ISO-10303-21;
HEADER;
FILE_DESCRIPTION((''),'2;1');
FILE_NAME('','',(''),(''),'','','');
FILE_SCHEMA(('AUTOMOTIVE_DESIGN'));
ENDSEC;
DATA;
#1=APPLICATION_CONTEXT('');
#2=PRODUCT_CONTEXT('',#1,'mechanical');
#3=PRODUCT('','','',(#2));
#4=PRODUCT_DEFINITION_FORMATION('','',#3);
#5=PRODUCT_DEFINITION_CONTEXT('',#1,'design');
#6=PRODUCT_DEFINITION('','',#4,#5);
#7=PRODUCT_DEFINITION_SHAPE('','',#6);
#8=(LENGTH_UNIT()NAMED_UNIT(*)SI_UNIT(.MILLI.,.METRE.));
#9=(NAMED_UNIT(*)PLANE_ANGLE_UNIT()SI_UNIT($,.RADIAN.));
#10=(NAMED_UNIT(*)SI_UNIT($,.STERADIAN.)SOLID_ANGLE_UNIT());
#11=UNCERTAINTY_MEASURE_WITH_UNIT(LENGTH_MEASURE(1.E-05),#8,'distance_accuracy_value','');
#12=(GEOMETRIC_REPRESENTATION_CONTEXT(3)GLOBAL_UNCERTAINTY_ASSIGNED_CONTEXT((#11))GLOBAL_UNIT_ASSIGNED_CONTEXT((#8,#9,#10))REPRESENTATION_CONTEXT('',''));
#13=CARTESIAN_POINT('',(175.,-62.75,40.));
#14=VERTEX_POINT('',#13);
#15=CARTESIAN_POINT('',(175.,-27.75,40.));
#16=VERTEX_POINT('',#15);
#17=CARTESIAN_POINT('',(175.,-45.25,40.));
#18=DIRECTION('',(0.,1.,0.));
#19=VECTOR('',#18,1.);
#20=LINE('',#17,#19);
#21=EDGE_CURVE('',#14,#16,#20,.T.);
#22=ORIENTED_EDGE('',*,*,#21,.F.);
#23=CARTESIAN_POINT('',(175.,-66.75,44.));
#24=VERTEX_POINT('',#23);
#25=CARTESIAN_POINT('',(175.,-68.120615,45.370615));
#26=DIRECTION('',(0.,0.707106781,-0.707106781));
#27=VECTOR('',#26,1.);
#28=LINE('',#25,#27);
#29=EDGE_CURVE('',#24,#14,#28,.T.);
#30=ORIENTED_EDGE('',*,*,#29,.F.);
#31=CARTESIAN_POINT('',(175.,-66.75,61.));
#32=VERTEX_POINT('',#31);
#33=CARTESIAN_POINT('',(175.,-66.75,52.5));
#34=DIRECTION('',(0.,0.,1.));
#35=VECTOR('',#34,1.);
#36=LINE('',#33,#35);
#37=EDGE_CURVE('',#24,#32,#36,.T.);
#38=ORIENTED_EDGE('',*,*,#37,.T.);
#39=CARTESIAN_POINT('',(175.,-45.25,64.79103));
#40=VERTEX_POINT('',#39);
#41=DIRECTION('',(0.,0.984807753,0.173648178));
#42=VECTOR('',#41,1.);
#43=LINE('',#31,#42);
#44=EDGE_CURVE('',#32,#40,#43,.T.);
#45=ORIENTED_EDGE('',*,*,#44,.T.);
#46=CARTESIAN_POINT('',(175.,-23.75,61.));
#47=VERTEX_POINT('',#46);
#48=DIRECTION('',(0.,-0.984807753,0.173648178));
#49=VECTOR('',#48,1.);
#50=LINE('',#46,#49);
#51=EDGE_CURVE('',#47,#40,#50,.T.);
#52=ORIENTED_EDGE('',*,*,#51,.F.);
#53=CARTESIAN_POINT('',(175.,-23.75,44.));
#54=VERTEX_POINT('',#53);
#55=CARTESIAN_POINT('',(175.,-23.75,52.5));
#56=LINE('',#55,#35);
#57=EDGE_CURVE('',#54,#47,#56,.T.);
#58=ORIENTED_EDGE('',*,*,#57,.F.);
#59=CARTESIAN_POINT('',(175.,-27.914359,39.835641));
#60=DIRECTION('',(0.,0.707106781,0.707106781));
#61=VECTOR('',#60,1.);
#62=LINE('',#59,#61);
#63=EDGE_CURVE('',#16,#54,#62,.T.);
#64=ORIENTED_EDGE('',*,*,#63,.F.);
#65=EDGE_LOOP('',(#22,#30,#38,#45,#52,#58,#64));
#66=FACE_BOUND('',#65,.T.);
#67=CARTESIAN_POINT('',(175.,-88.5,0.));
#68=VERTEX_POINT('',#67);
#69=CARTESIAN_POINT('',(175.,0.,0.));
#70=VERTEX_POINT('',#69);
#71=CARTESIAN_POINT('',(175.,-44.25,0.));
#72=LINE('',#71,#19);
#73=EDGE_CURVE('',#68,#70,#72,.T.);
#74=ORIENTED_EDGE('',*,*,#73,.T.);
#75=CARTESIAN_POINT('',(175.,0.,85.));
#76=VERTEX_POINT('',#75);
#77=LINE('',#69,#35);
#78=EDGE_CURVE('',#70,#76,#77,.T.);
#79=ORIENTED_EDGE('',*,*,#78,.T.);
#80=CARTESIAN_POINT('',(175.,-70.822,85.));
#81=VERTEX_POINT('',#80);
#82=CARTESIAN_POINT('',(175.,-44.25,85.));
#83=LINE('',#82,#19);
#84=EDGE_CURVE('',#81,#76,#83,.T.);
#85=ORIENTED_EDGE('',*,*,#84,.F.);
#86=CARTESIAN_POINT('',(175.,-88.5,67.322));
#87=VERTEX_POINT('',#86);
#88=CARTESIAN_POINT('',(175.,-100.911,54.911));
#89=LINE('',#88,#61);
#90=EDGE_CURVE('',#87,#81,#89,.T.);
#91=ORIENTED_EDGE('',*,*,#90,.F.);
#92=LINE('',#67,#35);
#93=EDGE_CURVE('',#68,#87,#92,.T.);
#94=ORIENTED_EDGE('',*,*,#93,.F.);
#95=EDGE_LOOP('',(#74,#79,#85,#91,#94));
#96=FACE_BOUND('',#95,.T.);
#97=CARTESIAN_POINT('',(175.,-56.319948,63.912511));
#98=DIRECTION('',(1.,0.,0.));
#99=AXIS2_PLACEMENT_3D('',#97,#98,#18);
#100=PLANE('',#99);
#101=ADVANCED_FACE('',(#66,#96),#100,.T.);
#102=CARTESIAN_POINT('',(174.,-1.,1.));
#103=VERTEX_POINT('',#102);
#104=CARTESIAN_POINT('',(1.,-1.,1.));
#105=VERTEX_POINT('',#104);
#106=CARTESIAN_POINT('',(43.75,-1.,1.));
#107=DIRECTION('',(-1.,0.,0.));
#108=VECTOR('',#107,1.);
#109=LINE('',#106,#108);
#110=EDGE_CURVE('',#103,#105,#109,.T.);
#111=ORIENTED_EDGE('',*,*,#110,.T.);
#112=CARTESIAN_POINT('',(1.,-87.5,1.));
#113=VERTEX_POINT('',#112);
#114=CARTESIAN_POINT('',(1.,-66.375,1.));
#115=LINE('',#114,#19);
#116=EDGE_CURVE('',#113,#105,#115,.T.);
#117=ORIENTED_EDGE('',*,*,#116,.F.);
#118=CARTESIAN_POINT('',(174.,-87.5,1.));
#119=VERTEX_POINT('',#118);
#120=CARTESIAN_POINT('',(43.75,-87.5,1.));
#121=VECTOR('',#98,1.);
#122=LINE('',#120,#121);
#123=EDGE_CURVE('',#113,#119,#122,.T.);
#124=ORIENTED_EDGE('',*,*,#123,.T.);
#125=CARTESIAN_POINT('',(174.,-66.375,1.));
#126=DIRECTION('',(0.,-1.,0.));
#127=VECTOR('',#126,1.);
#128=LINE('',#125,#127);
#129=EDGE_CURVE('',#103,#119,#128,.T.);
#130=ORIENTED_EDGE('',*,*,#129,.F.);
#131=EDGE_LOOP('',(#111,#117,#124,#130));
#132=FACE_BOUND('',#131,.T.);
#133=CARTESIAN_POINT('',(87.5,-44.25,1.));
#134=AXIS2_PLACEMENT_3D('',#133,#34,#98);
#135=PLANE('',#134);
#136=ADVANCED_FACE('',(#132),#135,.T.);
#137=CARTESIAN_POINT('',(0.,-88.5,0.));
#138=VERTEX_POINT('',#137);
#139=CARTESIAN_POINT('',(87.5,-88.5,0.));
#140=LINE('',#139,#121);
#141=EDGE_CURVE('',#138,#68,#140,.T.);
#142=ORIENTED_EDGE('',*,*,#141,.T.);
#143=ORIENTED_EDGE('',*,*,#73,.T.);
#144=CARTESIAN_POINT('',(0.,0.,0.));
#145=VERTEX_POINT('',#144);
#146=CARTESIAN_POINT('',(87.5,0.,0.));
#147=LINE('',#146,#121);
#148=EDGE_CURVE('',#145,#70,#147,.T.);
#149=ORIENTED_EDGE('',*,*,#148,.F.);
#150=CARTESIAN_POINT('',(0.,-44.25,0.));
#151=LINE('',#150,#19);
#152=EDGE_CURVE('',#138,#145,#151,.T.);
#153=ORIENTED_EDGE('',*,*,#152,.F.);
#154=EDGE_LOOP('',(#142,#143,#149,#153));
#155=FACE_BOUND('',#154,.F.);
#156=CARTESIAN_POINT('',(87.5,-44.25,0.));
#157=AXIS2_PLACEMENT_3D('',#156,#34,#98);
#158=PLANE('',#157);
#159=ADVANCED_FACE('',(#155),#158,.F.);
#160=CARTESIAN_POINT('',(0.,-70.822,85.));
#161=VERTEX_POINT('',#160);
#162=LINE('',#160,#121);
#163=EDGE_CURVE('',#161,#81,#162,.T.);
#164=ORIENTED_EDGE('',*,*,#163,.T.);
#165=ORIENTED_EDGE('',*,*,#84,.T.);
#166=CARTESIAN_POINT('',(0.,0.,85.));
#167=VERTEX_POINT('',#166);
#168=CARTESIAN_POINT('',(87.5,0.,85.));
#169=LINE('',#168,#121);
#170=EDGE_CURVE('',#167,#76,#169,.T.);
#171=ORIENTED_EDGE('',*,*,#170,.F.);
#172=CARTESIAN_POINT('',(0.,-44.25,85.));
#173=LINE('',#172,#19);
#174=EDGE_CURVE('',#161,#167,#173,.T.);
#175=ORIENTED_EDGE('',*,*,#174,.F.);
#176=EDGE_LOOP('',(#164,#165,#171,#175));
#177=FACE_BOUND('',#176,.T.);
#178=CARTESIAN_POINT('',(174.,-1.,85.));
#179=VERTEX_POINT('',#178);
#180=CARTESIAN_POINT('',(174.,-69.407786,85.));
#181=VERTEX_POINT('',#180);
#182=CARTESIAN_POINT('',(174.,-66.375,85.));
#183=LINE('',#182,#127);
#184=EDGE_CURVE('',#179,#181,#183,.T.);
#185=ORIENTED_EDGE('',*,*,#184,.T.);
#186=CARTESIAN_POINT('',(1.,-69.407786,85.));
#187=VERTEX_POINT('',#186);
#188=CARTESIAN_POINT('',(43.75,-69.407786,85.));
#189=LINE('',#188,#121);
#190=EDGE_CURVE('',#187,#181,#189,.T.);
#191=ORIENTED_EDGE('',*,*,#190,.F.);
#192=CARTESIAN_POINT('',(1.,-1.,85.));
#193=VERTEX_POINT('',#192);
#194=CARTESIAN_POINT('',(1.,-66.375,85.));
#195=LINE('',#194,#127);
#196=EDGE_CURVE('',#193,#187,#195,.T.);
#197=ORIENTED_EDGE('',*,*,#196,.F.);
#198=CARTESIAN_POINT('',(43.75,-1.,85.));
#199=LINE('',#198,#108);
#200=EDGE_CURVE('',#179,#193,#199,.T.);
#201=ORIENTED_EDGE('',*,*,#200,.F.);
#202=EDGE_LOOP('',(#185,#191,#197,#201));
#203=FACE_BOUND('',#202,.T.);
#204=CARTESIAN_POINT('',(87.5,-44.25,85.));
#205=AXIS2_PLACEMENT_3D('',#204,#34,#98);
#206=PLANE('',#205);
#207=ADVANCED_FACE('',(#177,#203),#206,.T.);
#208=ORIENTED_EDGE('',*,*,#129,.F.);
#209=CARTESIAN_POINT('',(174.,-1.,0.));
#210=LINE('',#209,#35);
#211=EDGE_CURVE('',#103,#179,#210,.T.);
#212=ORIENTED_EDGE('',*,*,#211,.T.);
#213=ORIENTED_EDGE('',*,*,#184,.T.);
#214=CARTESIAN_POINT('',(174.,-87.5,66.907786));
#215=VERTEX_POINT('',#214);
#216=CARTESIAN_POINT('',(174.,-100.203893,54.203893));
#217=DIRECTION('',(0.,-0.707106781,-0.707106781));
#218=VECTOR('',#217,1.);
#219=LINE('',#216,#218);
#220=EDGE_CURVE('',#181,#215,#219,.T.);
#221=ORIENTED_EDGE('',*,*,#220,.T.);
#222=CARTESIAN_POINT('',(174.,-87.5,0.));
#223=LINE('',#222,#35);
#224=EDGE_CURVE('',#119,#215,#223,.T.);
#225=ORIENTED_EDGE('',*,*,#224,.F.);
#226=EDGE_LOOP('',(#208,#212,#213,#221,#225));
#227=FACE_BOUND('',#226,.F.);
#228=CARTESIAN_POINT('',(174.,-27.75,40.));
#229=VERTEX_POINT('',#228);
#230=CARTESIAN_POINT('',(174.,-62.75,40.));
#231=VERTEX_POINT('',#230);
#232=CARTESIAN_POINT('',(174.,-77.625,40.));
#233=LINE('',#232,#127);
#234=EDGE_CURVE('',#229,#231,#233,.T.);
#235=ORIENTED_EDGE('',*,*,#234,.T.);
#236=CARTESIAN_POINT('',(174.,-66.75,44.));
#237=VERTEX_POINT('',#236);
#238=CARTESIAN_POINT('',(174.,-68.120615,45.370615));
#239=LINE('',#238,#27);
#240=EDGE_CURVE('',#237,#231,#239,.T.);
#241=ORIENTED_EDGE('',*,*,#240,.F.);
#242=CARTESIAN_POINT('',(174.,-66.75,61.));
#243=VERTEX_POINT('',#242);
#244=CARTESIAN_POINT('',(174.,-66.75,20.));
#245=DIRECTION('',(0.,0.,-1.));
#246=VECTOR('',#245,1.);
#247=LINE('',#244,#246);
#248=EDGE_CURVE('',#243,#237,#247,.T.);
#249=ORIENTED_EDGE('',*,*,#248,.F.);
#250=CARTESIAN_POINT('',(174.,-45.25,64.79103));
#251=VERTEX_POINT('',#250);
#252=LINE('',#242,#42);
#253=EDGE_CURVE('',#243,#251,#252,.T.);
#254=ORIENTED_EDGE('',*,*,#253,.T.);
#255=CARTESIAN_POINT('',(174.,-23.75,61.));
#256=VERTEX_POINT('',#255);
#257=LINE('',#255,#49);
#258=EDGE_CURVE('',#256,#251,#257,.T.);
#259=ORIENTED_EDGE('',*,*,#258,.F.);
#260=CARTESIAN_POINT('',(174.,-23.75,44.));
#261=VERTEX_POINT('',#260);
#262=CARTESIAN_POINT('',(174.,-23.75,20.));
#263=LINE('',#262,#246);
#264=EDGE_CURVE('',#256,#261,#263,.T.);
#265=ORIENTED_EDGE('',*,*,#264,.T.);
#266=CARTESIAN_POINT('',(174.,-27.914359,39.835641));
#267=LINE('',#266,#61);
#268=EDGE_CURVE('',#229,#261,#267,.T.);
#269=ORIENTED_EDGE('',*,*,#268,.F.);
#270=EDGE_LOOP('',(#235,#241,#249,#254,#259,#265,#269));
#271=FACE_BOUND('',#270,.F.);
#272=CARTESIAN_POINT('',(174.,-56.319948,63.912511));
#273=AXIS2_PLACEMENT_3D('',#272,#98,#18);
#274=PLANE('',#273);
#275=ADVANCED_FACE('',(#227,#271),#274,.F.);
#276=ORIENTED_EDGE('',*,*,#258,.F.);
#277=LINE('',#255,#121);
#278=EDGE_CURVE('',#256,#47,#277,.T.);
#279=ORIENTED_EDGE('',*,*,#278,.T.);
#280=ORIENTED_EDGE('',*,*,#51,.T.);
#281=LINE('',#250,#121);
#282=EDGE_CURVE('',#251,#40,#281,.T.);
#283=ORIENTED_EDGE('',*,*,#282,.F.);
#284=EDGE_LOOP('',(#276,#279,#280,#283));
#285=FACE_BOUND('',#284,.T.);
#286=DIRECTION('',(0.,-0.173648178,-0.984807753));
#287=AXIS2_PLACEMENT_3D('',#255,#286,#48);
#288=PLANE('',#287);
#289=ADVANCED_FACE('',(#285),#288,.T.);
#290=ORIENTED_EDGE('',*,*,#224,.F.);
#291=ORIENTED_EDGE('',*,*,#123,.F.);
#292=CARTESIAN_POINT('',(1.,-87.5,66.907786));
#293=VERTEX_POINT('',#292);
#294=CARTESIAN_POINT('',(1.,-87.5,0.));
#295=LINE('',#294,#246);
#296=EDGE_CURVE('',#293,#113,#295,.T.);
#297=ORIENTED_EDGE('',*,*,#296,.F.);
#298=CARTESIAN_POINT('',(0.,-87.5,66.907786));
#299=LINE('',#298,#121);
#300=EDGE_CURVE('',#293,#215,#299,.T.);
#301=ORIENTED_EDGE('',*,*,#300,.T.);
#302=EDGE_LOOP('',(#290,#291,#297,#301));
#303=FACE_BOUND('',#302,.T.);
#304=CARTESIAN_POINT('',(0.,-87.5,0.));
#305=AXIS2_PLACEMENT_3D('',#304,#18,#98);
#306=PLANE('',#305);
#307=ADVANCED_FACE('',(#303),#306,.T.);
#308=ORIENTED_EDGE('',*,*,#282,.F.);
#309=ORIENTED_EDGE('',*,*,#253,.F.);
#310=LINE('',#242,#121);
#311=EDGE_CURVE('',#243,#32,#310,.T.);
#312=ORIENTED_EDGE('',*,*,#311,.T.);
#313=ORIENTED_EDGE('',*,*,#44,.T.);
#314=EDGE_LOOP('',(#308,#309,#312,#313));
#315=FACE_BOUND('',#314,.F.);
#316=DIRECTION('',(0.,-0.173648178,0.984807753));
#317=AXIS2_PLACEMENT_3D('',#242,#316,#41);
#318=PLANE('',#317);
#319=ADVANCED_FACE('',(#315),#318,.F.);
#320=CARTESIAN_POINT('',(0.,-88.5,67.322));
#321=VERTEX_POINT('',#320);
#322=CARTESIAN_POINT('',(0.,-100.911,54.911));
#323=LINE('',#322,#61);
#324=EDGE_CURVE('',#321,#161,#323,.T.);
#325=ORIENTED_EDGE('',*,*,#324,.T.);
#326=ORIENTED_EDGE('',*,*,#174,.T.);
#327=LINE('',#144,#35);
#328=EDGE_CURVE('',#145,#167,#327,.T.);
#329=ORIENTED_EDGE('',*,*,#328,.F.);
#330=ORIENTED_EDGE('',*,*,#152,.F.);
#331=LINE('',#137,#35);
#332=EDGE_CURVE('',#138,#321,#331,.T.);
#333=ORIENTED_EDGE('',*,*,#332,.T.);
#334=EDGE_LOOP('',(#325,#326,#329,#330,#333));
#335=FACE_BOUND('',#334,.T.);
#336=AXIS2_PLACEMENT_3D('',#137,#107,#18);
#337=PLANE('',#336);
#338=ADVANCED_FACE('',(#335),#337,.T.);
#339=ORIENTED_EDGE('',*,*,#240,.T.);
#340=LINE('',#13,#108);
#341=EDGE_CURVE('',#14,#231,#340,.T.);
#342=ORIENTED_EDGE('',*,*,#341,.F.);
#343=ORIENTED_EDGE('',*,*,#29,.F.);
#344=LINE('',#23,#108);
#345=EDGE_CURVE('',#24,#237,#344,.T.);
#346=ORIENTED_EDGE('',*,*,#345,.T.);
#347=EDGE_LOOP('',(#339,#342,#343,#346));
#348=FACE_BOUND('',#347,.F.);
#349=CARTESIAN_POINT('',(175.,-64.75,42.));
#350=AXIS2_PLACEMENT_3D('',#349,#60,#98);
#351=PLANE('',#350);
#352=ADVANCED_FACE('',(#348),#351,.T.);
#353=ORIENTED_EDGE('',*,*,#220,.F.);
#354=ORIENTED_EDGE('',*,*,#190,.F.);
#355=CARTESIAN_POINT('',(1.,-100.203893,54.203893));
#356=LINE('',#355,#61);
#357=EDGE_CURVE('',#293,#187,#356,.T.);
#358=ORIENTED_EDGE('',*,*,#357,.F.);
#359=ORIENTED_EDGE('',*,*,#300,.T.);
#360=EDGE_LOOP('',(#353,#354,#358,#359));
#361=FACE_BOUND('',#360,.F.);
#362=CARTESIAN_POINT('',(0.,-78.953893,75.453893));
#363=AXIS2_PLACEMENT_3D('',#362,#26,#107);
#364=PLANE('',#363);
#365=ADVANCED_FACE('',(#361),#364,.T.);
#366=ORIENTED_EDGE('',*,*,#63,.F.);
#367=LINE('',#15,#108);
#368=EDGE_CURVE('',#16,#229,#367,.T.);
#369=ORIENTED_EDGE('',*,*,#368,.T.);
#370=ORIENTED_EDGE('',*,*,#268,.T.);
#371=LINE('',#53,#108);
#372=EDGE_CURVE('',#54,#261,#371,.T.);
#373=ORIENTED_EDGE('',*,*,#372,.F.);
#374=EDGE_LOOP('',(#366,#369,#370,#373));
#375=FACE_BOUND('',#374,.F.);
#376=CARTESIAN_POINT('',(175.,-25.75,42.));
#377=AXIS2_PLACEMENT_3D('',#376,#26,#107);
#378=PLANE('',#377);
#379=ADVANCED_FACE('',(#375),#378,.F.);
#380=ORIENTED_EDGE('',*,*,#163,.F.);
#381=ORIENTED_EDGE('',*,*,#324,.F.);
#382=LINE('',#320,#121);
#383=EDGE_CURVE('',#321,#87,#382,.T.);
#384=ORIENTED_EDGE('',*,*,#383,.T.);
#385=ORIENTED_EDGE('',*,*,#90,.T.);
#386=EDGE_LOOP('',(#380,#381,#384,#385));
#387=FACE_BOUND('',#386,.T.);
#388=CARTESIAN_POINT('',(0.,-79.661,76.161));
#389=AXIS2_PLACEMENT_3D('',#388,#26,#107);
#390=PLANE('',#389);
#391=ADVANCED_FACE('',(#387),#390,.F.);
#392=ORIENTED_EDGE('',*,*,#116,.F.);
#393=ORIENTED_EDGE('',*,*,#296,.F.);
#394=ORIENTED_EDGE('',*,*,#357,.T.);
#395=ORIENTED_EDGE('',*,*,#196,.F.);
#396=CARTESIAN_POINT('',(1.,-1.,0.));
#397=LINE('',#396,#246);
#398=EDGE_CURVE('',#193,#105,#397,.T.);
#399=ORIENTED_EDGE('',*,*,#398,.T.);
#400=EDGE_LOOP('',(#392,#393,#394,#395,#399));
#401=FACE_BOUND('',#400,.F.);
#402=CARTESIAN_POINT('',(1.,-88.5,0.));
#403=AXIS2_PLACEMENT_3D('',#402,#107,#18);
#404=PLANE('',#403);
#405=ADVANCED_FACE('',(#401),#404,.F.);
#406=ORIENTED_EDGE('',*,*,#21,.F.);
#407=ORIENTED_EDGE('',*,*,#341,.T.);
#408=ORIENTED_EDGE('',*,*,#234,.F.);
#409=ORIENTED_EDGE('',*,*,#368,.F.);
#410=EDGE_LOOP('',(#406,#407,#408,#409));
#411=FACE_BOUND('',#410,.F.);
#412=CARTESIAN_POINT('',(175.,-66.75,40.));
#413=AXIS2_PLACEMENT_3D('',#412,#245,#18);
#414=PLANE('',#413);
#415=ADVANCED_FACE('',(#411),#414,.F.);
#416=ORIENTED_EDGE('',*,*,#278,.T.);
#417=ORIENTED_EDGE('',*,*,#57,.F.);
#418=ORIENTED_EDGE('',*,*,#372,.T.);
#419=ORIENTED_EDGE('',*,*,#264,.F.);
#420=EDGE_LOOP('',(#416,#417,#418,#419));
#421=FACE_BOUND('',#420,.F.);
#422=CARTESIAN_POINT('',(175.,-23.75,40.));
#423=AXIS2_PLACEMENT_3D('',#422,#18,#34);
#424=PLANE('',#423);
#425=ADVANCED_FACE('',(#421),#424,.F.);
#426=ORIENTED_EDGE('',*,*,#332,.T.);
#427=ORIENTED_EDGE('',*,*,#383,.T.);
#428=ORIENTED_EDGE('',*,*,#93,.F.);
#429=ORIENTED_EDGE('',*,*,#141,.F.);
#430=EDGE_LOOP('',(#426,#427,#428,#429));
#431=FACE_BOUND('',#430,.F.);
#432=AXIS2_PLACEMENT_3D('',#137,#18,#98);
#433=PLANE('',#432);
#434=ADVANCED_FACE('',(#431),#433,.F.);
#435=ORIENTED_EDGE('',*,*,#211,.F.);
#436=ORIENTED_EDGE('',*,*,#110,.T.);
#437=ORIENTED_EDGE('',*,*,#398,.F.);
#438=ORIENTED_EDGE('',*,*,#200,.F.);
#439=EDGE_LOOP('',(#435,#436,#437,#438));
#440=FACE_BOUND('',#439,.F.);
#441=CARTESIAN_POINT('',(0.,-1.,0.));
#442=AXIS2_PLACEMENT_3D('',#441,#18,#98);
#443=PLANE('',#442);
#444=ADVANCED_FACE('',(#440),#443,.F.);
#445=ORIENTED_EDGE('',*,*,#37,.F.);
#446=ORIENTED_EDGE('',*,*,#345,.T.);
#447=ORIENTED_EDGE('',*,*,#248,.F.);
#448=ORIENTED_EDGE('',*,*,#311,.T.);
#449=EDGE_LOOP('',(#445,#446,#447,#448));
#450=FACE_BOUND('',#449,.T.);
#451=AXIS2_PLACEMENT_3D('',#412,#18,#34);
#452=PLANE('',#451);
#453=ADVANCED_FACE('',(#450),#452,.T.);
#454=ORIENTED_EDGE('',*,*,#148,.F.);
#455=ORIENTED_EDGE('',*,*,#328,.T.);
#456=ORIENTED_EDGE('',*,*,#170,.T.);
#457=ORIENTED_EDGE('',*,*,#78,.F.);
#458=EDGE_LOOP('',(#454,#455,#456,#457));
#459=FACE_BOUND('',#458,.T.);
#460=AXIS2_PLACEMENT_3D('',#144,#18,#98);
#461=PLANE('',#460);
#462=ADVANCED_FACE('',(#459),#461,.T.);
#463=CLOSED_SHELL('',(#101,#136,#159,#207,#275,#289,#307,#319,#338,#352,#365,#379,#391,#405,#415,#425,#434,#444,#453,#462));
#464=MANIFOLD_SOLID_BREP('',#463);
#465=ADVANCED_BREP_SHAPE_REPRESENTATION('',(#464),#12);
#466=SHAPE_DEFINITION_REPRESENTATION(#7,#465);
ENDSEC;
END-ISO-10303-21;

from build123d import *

# Parameters (mm, degrees)
F0_W        = 175
F0_H        = 88.5
F1_DEPTH    = 85
F2_SIZE     = 17.678
F3_T        = -1
F4_W        = 43
F4_H        = 25
F5_DEPTH    = 2
F6_T1_DEPTH = 1
F7_SIZE     = 4


# Not quite as in the source:
# - a fillet or chamfer that OpenCascade refuses, or shapes differently, is made with other operations: its cross-section is extruded or revolved along the edge and cut away or added


with BuildPart() as f1:
    # F0 (on Top) → F1 (new body)
    with BuildSketch(Plane.XY):
        with Locations((87.5, -44.25)):
            Rectangle(F0_W, F0_H)
    extrude(amount=F1_DEPTH)

    # F2
    f2_edges = [f1.edges().sort_by_distance(p)[0] for p in [
        (87.5, -88.5, 85),
    ]]
    chamfer(f2_edges, length=F2_SIZE)

    # F3
    f3_openings = [f1.faces().sort_by_distance(p)[0] for p in [
        (87.5, -35.411, 85),
    ]]
    offset(amount=F3_T, openings=f3_openings, kind=Kind.INTERSECTION)

    # F4 (on face) → F5 (cut)
    with BuildSketch(Plane.YZ.offset(175)):
        with Locations((-45.25, 52.5)):
            Rectangle(F4_W, F4_H)
    extrude(amount=-F5_DEPTH, mode=Mode.SUBTRACT)

    # F6: chamfer of 4 x 22.6851272785 on 2 edges, made by hand

    # F6_s2 → F6_t1 (join)
    with BuildSketch(Plane.YZ.offset(174)):
        Polygon((-66.75, 61), (-44.0648727215, 65), (-66.75, 65), align=None)
        Polygon((-23.75, 61), (-46.4351272785, 65), (-23.75, 65), align=None)
    extrude(amount=F6_T1_DEPTH)

    # F7
    f7_edges = [f1.edges().sort_by_distance(p)[0] for p in [
        (174.5, -66.75, 40),
        (174.5, -23.75, 40),
    ]]
    chamfer(f7_edges, length=F7_SIZE)


solid = f1.part
